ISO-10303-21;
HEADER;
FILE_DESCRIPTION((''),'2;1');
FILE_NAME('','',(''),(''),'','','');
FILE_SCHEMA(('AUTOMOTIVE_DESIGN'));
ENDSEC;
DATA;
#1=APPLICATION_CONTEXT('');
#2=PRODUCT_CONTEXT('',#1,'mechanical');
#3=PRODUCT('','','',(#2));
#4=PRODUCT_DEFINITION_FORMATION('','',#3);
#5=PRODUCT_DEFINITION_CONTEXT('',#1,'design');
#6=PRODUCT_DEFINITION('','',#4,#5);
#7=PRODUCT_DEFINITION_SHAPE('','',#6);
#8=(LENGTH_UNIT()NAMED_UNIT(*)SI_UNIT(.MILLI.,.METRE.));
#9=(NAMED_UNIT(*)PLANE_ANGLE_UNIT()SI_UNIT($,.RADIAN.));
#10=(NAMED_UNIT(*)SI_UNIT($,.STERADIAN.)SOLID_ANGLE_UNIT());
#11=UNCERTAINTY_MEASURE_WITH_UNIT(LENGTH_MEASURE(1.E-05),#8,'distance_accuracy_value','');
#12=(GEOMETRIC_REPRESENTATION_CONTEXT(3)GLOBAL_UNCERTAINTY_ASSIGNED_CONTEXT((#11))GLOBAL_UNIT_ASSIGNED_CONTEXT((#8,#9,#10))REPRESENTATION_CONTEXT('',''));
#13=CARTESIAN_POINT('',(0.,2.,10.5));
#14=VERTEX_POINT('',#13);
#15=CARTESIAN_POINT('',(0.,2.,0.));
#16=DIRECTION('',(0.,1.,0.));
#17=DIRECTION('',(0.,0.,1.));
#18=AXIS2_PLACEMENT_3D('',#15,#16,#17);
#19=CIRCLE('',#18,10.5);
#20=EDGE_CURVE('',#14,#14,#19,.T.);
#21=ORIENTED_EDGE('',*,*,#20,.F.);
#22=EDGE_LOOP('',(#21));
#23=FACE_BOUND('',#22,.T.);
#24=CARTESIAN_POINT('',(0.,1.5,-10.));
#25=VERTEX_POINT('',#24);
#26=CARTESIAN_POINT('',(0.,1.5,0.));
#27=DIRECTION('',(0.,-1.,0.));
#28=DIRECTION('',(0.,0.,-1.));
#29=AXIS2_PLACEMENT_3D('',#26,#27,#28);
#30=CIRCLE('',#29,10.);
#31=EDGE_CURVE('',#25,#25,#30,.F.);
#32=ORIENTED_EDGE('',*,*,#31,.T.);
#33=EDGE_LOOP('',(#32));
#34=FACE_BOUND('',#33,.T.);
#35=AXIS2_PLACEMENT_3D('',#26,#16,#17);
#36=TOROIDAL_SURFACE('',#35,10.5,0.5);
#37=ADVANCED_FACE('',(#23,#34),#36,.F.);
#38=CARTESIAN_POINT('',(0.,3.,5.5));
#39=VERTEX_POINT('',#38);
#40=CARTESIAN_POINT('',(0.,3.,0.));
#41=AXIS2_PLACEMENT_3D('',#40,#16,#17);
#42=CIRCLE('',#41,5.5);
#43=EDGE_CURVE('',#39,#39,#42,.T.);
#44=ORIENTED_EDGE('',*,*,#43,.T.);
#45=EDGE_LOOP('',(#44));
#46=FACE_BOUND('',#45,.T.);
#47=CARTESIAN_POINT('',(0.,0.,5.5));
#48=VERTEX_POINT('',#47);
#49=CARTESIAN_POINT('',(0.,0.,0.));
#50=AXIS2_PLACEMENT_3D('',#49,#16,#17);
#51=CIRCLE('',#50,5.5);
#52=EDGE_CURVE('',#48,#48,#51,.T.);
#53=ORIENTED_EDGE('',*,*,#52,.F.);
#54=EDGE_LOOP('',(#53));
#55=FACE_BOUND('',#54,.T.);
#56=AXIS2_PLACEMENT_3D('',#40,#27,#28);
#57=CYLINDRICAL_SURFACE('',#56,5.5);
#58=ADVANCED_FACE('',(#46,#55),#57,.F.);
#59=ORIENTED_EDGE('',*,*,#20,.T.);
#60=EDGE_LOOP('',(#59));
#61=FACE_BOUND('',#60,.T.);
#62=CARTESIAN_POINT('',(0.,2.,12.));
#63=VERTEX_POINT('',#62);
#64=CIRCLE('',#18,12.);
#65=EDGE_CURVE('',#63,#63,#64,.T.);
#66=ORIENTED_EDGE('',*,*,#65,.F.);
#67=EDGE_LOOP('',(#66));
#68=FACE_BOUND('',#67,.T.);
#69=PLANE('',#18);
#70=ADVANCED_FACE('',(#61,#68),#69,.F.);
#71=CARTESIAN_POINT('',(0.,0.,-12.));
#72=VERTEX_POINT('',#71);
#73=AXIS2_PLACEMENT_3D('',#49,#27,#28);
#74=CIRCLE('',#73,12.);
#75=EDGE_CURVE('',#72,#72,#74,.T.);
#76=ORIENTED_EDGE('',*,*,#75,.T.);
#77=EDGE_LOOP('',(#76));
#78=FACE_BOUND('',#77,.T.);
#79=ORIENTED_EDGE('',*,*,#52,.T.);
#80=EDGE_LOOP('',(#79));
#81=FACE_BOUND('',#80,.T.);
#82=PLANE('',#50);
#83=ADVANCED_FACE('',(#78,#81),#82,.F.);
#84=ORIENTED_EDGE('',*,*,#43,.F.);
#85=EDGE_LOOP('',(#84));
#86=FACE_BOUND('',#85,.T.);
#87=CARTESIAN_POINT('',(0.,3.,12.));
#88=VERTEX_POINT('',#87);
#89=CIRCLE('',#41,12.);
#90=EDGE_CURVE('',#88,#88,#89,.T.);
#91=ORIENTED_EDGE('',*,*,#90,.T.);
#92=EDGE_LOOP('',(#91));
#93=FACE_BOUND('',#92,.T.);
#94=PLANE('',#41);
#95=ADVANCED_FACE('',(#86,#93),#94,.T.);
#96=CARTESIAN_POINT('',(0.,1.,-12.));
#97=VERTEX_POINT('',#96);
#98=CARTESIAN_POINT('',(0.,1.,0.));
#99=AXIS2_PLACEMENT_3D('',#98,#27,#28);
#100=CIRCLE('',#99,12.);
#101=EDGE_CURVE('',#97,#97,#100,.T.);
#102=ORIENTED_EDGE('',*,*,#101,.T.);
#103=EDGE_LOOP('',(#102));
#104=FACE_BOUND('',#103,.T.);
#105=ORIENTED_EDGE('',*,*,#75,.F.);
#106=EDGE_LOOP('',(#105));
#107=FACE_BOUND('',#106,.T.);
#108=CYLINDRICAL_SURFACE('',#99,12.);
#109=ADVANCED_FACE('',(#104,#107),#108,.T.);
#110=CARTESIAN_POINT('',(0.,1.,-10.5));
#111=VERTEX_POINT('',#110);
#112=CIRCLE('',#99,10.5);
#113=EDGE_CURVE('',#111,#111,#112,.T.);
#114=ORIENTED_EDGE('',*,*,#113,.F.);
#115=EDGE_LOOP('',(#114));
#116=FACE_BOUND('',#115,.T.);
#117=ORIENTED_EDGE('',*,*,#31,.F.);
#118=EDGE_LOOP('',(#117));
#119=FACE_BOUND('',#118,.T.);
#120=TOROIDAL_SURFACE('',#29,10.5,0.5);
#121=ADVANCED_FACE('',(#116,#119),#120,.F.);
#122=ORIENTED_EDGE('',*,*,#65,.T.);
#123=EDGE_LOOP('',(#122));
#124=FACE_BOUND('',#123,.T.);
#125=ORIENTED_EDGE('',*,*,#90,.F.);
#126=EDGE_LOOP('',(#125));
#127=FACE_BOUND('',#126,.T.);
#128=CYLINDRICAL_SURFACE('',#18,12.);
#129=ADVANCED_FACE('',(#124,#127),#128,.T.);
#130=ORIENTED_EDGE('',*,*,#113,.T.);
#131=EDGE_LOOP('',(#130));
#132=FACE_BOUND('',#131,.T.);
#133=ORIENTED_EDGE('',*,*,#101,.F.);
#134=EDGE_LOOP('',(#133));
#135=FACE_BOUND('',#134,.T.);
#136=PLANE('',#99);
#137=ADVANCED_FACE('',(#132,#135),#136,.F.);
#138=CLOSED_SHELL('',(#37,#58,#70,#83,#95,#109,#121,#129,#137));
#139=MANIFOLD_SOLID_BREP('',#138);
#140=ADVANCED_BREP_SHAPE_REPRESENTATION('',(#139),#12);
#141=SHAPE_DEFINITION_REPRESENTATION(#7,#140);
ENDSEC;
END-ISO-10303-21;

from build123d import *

# Parameters (mm, degrees)
SKETCH1_R           = 10
SKETCH1_R_2         = 5.5
BOSS_EXTRUDE1_DEPTH = 3
BOSS_EXTRUDE2_START = -1
SKETCH2_R           = 12
SKETCH2_R_2         = 10
BOSS_EXTRUDE2_DEPTH = 1
SKETCH3_R           = 12
SKETCH3_R_2         = 10
BOSS_EXTRUDE3_DEPTH = 1
FILLET2_R           = 0.5


with BuildPart() as part:
    # Sketch1 → Boss-Extrude1 (new body)
    with BuildSketch(Plane(origin=(0, 0, 0), x_dir=(1, 0, 0), z_dir=(0, 1, 0))):
        with Locations(Location((0, 0, 0), (0, 0, 270))):
            Circle(SKETCH1_R)
        with Locations(Location((0, 0, 0), (0, 0, 270))):
            Circle(SKETCH1_R_2, mode=Mode.SUBTRACT)
    extrude(amount=BOSS_EXTRUDE1_DEPTH)

    # Sketch2 → Boss-Extrude2 (add)
    with BuildSketch(Plane(origin=(0, 3, 0), x_dir=(1, 0, 0), z_dir=(0, 1, 0)).offset(BOSS_EXTRUDE2_START)):
        with Locations(Location((0, 0, 0), (0, 0, 270))):
            Circle(SKETCH2_R)
        with Locations(Location((0, 0, 0), (0, 0, 270))):
            Circle(SKETCH2_R_2, mode=Mode.SUBTRACT)
    extrude(amount=BOSS_EXTRUDE2_DEPTH)

    # Sketch3 → Boss-Extrude3 (add)
    with BuildSketch(Plane.XZ):
        with Locations(Location((0, 0, 0), (0, 0, 90))):
            Circle(SKETCH3_R)
        with Locations(Location((0, 0, 0), (0, 0, 270))):
            Circle(SKETCH3_R_2, mode=Mode.SUBTRACT)
    extrude(amount=-BOSS_EXTRUDE3_DEPTH)

    # Fillet2
    fillet2_edges = [part.edges().sort_by_distance(p)[0] for p in [
        (0, 2, -10),
        (0, 1, -10),
    ]]
    fillet(fillet2_edges, radius=FILLET2_R - 0.0001)  # a hair under: the kernel refuses the full size


solid = part.part
